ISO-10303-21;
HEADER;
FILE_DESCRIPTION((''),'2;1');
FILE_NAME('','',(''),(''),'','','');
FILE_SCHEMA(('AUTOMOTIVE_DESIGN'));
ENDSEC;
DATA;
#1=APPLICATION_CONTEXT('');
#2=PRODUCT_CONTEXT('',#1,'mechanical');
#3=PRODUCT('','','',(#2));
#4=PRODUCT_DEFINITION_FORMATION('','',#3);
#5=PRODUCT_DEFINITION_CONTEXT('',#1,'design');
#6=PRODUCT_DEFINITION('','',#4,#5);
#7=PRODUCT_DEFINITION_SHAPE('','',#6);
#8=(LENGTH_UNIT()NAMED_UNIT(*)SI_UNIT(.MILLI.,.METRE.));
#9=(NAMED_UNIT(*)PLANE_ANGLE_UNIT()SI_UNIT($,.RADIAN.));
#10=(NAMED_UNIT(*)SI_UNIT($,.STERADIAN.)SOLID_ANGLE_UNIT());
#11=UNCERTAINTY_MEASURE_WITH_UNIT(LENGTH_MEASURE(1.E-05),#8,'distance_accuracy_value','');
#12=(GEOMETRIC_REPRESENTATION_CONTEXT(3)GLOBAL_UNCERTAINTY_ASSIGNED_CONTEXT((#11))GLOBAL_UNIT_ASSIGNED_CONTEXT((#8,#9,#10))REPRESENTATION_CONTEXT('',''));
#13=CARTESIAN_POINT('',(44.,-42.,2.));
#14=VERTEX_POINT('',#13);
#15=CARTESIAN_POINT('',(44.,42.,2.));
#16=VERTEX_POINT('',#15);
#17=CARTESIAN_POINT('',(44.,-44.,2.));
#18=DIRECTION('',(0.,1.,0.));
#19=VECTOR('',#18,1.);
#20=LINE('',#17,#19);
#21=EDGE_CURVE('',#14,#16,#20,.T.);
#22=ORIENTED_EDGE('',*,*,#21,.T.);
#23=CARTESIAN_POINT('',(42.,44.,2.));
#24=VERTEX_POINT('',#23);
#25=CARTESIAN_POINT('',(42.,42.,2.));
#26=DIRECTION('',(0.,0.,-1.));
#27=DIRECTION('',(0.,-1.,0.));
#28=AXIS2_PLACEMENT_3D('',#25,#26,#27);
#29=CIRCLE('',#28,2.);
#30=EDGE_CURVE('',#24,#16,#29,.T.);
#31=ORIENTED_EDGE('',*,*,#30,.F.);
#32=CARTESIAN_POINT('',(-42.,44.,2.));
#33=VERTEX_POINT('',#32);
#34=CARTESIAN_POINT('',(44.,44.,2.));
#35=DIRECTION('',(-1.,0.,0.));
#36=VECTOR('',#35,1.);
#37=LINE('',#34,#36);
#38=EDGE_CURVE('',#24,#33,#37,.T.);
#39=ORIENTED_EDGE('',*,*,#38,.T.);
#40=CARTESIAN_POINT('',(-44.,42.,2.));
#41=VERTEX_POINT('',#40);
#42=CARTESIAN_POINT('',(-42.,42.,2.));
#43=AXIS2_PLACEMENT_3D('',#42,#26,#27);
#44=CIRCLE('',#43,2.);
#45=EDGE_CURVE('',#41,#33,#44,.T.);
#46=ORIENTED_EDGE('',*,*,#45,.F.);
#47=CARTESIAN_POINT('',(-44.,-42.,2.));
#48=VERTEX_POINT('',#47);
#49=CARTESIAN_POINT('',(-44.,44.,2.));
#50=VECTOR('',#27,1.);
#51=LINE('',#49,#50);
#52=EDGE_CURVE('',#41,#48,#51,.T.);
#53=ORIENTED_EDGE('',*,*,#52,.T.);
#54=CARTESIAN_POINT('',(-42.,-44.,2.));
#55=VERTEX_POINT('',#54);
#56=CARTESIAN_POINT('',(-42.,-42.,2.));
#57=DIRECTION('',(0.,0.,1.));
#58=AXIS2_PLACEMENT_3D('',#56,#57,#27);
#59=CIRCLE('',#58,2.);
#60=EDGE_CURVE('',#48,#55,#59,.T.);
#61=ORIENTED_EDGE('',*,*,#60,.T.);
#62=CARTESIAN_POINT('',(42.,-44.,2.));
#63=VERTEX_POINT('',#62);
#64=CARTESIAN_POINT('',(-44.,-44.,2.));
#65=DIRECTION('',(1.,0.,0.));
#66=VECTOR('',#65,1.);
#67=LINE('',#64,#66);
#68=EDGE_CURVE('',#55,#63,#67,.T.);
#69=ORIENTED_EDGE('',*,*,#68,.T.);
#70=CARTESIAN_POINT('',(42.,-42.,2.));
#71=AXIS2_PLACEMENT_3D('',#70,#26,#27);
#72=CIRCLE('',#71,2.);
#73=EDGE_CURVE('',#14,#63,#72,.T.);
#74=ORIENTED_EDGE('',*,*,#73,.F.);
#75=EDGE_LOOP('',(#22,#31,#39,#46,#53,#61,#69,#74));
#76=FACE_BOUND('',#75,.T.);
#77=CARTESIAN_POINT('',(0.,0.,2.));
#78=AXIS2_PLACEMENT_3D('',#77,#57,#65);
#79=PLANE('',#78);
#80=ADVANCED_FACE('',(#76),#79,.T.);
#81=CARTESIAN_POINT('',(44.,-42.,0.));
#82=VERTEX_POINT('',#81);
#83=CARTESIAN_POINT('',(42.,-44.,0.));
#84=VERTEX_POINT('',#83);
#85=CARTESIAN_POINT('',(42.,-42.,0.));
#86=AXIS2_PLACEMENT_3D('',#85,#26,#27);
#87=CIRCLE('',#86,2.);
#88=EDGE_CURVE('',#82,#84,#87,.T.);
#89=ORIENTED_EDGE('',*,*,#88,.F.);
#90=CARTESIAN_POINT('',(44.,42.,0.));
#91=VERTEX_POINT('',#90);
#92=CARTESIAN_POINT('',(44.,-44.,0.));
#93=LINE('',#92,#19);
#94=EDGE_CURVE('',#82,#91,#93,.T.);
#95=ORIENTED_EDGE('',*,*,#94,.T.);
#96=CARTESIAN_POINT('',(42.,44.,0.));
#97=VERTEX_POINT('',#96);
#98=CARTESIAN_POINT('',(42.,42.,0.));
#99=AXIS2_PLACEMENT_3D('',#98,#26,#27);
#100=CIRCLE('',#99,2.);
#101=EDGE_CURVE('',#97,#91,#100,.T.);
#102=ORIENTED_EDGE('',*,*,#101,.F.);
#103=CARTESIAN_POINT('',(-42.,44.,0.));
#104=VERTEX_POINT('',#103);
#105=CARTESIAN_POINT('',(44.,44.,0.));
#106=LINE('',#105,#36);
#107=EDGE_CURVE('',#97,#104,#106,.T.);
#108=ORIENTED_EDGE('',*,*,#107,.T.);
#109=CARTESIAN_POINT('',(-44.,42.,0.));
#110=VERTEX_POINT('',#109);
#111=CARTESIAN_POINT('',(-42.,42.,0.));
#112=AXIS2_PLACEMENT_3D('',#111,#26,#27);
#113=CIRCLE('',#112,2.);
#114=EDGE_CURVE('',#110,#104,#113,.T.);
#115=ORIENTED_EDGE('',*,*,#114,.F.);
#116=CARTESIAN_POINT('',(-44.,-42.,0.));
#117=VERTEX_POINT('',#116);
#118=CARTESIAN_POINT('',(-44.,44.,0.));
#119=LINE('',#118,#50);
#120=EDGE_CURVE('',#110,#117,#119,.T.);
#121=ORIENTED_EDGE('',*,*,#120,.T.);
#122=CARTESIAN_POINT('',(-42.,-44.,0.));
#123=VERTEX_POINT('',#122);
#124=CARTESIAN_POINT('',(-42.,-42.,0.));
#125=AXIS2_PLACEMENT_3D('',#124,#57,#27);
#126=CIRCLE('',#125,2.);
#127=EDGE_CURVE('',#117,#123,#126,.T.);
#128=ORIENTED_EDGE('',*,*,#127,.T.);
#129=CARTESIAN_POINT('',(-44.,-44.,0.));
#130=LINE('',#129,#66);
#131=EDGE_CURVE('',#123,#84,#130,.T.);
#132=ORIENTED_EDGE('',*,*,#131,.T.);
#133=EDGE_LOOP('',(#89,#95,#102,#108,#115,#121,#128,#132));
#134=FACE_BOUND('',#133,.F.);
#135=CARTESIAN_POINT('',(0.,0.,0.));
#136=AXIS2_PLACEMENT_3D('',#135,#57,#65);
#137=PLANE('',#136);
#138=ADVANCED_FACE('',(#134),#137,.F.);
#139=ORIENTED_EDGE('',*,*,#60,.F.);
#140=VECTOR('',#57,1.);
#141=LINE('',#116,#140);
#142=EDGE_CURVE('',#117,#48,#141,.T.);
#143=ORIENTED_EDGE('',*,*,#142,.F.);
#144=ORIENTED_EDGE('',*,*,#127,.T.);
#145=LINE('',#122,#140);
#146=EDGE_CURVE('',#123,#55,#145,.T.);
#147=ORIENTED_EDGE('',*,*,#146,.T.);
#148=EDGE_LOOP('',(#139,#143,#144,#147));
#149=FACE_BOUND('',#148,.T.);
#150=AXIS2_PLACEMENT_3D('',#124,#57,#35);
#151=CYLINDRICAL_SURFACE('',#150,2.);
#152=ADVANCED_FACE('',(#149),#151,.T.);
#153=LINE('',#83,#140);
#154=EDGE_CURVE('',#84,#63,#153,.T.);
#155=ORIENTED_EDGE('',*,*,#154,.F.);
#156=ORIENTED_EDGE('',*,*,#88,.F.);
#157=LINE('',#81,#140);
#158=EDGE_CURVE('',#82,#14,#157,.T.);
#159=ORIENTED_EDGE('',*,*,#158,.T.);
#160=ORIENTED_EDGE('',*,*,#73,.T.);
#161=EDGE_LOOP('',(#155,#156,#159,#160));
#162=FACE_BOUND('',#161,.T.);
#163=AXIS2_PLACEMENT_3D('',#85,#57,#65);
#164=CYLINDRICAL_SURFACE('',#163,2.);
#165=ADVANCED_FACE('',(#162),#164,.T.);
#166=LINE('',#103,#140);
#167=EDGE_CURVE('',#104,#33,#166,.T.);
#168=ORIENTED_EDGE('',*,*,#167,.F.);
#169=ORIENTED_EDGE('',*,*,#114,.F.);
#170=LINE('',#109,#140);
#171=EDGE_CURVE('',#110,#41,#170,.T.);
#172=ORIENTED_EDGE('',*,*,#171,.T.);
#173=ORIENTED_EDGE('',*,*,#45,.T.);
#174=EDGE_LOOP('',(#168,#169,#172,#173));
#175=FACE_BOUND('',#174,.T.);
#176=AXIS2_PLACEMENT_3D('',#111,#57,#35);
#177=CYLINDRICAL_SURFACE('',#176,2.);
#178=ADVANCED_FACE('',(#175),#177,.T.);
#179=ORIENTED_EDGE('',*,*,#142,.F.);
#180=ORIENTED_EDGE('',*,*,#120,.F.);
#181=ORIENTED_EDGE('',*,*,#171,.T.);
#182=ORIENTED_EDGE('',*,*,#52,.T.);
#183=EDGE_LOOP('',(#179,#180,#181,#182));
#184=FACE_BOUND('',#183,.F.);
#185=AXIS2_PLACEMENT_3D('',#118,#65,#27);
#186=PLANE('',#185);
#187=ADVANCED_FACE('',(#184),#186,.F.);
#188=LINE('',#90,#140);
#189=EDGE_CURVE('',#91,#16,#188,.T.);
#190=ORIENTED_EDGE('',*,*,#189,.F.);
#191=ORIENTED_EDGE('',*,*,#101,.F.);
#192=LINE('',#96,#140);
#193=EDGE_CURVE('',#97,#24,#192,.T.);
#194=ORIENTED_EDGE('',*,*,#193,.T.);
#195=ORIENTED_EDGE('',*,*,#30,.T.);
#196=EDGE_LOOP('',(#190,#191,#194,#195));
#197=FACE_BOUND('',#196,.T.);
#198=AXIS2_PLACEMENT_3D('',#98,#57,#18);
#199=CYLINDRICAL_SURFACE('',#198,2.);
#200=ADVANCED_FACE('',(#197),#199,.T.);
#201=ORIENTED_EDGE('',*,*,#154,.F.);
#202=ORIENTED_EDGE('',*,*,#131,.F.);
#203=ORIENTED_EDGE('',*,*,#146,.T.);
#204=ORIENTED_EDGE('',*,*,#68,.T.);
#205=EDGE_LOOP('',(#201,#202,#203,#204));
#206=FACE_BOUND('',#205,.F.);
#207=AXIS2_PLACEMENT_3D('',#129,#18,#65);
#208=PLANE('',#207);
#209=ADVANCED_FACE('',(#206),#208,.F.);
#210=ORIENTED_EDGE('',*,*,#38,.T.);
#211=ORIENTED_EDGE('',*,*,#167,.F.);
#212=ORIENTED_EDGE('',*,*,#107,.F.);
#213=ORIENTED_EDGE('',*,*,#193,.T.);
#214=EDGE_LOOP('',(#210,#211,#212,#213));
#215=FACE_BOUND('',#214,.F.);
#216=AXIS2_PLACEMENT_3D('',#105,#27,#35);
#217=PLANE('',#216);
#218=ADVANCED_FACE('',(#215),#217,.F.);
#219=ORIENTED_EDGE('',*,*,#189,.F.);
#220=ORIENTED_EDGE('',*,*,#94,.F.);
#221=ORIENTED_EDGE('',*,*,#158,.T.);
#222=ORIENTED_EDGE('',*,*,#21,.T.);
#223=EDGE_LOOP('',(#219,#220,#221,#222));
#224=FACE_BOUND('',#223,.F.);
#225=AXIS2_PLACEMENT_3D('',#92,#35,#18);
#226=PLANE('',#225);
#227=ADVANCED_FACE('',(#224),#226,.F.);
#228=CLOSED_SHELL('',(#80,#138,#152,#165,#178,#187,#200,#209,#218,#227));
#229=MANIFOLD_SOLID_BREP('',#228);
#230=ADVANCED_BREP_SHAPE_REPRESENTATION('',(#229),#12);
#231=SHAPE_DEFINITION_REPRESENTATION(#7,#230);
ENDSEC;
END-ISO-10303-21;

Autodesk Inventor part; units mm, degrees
ref_plane "YZ Plane" through (0, 0, 0) normal (1, 0, 0) x (0, 1, 0)
ref_plane "XZ Plane" through (0, 0, 0) normal (0, 1, 0) x (-1, 0, 0)
ref_plane "XY Plane" through (0, 0, 0) normal (0, 0, 1) x (1, 0, 0)
sketch "Sketch1" plane through (0, 0, 0) normal (0, 0, 1) x (1, 0, 0)
  line L0 (-44, -44) -> (44, -44)
  line L1 (44, -44) -> (44, 44)
  line L2 (44, 44) -> (-44, 44)
  line L3 (-44, 44) -> (-44, -44)
  line L4 (-44, -44) -> (44, 44) construction
  line L5 (44, -44) -> (-44, 44) construction
  point P0 (0, 0)
  dimension "d154" = 88
  dimension "d155" = 88
extrude "Plate5" add sketch "Sketch1" along normal blind 2
fillet "Corner Round1" radius 2 4 edges at (44, 44, 1) (-44, 44, 1) (-44, -44, 1) (44, -44, 1)
properties part number "PRS 8665 FDS CUP 1_940" material "Stainless Steel"
